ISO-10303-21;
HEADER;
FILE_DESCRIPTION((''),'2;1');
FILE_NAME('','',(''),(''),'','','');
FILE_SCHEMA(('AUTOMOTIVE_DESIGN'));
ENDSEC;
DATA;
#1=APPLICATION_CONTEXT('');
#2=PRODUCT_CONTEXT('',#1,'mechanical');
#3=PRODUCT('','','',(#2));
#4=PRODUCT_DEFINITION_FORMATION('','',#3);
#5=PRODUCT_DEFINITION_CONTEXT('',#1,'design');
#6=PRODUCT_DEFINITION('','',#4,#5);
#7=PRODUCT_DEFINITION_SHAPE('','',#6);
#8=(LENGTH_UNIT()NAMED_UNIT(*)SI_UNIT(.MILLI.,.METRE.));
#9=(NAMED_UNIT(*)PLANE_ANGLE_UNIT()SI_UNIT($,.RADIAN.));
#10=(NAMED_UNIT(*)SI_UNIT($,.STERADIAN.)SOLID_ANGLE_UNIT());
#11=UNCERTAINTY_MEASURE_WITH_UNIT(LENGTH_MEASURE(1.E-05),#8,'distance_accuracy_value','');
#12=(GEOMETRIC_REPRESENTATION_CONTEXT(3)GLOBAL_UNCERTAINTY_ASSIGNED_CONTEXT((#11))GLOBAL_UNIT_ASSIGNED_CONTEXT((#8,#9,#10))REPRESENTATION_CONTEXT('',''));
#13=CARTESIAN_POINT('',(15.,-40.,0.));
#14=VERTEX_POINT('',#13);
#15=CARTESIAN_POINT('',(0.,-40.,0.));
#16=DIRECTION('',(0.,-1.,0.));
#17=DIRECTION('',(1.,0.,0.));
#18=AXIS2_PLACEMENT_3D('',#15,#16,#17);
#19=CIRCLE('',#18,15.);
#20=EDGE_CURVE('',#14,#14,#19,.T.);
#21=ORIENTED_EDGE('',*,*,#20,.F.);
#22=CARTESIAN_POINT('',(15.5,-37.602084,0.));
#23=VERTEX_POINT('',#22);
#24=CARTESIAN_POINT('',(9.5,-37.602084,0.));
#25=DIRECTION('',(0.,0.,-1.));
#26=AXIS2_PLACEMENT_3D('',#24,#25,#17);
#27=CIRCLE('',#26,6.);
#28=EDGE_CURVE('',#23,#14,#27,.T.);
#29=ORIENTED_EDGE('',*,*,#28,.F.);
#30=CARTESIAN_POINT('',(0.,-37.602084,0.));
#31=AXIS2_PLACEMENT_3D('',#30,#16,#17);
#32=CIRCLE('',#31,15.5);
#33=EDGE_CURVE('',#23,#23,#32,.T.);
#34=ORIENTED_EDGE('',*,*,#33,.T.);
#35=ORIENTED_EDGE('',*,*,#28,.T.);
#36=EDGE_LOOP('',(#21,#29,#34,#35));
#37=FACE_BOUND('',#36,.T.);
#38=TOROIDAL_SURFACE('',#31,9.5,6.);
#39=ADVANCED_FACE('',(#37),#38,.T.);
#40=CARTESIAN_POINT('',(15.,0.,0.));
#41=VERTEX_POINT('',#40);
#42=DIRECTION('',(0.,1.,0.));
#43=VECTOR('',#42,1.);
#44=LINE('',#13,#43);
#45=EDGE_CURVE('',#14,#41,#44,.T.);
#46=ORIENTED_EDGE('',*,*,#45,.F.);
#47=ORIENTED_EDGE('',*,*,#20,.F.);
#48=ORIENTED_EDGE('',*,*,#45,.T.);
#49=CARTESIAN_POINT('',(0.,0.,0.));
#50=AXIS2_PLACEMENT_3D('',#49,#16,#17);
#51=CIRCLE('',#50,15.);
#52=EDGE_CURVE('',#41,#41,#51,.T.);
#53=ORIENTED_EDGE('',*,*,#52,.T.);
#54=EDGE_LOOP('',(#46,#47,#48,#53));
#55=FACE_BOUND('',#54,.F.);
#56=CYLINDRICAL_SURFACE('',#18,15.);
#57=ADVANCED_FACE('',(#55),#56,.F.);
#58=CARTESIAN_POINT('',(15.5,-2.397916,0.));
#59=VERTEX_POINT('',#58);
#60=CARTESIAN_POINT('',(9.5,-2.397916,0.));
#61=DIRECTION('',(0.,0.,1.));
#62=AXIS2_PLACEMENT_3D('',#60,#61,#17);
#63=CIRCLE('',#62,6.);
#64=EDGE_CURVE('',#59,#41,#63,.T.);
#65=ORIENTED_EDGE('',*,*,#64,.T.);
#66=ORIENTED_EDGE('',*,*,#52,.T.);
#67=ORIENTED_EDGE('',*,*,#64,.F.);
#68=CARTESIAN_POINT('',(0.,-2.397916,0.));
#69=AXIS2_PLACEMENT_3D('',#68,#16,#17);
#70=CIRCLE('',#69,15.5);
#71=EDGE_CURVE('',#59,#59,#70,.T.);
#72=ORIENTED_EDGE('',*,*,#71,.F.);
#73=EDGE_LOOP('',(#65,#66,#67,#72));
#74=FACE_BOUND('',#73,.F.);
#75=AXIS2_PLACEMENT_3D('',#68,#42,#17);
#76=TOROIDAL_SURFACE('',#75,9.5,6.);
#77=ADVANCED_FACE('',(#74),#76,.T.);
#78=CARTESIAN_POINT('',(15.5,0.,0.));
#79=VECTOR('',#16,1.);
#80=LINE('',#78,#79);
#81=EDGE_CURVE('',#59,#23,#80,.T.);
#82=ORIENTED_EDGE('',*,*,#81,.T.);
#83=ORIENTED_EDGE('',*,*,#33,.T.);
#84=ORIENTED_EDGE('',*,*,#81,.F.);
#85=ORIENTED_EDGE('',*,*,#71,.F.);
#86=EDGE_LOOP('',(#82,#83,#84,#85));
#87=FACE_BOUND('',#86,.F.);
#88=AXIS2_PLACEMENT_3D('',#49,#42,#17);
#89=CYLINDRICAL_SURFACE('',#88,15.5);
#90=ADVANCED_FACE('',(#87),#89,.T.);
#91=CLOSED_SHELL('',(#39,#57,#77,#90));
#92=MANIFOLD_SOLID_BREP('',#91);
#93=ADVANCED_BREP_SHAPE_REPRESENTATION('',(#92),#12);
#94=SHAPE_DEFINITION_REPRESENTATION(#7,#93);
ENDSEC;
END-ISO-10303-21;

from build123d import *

# Parameters (mm, degrees)
F0_R     = 15.5
F1_DEPTH = 40
F2_R     = 15
F3_DEPTH = 40


# Not quite as in the source:
# - a fillet or chamfer that OpenCascade refuses, or shapes differently, is made with other operations: its cross-section is extruded or revolved along the edge and cut away or added


with BuildPart() as f1:
    # F0 (on Front) → F1 (new body)
    with BuildSketch(Plane.XZ):
        Circle(F0_R)
    extrude(amount=F1_DEPTH)

    # F2 (on face) → F3 (cut)
    with BuildSketch(Plane.XZ.offset(40)):
        Circle(F2_R)
    extrude(amount=-F3_DEPTH, mode=Mode.SUBTRACT)

    # F4: fillet of radius 6 on 1 edges, made by hand

    # F4_s1 → F4_t2 (revolve, cut)
    with BuildSketch(Plane.XY):
        with BuildLine():
            ThreePointArc((15.5, -37.6020842383), (15.3736700622, -38.8268291097), (15, -40))
            Line((15, -40), (15.5, -40))
            Line((15.5, -40), (15.5, -37.6020842383))
        make_face()
    revolve(axis=Axis((0, -40, 0), (0, -1, 0)), mode=Mode.SUBTRACT)

    # F5: fillet of radius 6 on 1 edges, made by hand

    # F5_s1 → F5_t2 (revolve, cut)
    with BuildSketch(Plane.XY):
        with BuildLine():
            ThreePointArc((15.5, -2.3979157617), (15.3736700622, -1.1731708903), (15, 0))
            Line((15, 0), (15.5, 0))
            Line((15.5, 0), (15.5, -2.3979157617))
        make_face()
    revolve(axis=Axis((0, 0, 0), (0, -1, 0)), mode=Mode.SUBTRACT)


solid = f1.part
